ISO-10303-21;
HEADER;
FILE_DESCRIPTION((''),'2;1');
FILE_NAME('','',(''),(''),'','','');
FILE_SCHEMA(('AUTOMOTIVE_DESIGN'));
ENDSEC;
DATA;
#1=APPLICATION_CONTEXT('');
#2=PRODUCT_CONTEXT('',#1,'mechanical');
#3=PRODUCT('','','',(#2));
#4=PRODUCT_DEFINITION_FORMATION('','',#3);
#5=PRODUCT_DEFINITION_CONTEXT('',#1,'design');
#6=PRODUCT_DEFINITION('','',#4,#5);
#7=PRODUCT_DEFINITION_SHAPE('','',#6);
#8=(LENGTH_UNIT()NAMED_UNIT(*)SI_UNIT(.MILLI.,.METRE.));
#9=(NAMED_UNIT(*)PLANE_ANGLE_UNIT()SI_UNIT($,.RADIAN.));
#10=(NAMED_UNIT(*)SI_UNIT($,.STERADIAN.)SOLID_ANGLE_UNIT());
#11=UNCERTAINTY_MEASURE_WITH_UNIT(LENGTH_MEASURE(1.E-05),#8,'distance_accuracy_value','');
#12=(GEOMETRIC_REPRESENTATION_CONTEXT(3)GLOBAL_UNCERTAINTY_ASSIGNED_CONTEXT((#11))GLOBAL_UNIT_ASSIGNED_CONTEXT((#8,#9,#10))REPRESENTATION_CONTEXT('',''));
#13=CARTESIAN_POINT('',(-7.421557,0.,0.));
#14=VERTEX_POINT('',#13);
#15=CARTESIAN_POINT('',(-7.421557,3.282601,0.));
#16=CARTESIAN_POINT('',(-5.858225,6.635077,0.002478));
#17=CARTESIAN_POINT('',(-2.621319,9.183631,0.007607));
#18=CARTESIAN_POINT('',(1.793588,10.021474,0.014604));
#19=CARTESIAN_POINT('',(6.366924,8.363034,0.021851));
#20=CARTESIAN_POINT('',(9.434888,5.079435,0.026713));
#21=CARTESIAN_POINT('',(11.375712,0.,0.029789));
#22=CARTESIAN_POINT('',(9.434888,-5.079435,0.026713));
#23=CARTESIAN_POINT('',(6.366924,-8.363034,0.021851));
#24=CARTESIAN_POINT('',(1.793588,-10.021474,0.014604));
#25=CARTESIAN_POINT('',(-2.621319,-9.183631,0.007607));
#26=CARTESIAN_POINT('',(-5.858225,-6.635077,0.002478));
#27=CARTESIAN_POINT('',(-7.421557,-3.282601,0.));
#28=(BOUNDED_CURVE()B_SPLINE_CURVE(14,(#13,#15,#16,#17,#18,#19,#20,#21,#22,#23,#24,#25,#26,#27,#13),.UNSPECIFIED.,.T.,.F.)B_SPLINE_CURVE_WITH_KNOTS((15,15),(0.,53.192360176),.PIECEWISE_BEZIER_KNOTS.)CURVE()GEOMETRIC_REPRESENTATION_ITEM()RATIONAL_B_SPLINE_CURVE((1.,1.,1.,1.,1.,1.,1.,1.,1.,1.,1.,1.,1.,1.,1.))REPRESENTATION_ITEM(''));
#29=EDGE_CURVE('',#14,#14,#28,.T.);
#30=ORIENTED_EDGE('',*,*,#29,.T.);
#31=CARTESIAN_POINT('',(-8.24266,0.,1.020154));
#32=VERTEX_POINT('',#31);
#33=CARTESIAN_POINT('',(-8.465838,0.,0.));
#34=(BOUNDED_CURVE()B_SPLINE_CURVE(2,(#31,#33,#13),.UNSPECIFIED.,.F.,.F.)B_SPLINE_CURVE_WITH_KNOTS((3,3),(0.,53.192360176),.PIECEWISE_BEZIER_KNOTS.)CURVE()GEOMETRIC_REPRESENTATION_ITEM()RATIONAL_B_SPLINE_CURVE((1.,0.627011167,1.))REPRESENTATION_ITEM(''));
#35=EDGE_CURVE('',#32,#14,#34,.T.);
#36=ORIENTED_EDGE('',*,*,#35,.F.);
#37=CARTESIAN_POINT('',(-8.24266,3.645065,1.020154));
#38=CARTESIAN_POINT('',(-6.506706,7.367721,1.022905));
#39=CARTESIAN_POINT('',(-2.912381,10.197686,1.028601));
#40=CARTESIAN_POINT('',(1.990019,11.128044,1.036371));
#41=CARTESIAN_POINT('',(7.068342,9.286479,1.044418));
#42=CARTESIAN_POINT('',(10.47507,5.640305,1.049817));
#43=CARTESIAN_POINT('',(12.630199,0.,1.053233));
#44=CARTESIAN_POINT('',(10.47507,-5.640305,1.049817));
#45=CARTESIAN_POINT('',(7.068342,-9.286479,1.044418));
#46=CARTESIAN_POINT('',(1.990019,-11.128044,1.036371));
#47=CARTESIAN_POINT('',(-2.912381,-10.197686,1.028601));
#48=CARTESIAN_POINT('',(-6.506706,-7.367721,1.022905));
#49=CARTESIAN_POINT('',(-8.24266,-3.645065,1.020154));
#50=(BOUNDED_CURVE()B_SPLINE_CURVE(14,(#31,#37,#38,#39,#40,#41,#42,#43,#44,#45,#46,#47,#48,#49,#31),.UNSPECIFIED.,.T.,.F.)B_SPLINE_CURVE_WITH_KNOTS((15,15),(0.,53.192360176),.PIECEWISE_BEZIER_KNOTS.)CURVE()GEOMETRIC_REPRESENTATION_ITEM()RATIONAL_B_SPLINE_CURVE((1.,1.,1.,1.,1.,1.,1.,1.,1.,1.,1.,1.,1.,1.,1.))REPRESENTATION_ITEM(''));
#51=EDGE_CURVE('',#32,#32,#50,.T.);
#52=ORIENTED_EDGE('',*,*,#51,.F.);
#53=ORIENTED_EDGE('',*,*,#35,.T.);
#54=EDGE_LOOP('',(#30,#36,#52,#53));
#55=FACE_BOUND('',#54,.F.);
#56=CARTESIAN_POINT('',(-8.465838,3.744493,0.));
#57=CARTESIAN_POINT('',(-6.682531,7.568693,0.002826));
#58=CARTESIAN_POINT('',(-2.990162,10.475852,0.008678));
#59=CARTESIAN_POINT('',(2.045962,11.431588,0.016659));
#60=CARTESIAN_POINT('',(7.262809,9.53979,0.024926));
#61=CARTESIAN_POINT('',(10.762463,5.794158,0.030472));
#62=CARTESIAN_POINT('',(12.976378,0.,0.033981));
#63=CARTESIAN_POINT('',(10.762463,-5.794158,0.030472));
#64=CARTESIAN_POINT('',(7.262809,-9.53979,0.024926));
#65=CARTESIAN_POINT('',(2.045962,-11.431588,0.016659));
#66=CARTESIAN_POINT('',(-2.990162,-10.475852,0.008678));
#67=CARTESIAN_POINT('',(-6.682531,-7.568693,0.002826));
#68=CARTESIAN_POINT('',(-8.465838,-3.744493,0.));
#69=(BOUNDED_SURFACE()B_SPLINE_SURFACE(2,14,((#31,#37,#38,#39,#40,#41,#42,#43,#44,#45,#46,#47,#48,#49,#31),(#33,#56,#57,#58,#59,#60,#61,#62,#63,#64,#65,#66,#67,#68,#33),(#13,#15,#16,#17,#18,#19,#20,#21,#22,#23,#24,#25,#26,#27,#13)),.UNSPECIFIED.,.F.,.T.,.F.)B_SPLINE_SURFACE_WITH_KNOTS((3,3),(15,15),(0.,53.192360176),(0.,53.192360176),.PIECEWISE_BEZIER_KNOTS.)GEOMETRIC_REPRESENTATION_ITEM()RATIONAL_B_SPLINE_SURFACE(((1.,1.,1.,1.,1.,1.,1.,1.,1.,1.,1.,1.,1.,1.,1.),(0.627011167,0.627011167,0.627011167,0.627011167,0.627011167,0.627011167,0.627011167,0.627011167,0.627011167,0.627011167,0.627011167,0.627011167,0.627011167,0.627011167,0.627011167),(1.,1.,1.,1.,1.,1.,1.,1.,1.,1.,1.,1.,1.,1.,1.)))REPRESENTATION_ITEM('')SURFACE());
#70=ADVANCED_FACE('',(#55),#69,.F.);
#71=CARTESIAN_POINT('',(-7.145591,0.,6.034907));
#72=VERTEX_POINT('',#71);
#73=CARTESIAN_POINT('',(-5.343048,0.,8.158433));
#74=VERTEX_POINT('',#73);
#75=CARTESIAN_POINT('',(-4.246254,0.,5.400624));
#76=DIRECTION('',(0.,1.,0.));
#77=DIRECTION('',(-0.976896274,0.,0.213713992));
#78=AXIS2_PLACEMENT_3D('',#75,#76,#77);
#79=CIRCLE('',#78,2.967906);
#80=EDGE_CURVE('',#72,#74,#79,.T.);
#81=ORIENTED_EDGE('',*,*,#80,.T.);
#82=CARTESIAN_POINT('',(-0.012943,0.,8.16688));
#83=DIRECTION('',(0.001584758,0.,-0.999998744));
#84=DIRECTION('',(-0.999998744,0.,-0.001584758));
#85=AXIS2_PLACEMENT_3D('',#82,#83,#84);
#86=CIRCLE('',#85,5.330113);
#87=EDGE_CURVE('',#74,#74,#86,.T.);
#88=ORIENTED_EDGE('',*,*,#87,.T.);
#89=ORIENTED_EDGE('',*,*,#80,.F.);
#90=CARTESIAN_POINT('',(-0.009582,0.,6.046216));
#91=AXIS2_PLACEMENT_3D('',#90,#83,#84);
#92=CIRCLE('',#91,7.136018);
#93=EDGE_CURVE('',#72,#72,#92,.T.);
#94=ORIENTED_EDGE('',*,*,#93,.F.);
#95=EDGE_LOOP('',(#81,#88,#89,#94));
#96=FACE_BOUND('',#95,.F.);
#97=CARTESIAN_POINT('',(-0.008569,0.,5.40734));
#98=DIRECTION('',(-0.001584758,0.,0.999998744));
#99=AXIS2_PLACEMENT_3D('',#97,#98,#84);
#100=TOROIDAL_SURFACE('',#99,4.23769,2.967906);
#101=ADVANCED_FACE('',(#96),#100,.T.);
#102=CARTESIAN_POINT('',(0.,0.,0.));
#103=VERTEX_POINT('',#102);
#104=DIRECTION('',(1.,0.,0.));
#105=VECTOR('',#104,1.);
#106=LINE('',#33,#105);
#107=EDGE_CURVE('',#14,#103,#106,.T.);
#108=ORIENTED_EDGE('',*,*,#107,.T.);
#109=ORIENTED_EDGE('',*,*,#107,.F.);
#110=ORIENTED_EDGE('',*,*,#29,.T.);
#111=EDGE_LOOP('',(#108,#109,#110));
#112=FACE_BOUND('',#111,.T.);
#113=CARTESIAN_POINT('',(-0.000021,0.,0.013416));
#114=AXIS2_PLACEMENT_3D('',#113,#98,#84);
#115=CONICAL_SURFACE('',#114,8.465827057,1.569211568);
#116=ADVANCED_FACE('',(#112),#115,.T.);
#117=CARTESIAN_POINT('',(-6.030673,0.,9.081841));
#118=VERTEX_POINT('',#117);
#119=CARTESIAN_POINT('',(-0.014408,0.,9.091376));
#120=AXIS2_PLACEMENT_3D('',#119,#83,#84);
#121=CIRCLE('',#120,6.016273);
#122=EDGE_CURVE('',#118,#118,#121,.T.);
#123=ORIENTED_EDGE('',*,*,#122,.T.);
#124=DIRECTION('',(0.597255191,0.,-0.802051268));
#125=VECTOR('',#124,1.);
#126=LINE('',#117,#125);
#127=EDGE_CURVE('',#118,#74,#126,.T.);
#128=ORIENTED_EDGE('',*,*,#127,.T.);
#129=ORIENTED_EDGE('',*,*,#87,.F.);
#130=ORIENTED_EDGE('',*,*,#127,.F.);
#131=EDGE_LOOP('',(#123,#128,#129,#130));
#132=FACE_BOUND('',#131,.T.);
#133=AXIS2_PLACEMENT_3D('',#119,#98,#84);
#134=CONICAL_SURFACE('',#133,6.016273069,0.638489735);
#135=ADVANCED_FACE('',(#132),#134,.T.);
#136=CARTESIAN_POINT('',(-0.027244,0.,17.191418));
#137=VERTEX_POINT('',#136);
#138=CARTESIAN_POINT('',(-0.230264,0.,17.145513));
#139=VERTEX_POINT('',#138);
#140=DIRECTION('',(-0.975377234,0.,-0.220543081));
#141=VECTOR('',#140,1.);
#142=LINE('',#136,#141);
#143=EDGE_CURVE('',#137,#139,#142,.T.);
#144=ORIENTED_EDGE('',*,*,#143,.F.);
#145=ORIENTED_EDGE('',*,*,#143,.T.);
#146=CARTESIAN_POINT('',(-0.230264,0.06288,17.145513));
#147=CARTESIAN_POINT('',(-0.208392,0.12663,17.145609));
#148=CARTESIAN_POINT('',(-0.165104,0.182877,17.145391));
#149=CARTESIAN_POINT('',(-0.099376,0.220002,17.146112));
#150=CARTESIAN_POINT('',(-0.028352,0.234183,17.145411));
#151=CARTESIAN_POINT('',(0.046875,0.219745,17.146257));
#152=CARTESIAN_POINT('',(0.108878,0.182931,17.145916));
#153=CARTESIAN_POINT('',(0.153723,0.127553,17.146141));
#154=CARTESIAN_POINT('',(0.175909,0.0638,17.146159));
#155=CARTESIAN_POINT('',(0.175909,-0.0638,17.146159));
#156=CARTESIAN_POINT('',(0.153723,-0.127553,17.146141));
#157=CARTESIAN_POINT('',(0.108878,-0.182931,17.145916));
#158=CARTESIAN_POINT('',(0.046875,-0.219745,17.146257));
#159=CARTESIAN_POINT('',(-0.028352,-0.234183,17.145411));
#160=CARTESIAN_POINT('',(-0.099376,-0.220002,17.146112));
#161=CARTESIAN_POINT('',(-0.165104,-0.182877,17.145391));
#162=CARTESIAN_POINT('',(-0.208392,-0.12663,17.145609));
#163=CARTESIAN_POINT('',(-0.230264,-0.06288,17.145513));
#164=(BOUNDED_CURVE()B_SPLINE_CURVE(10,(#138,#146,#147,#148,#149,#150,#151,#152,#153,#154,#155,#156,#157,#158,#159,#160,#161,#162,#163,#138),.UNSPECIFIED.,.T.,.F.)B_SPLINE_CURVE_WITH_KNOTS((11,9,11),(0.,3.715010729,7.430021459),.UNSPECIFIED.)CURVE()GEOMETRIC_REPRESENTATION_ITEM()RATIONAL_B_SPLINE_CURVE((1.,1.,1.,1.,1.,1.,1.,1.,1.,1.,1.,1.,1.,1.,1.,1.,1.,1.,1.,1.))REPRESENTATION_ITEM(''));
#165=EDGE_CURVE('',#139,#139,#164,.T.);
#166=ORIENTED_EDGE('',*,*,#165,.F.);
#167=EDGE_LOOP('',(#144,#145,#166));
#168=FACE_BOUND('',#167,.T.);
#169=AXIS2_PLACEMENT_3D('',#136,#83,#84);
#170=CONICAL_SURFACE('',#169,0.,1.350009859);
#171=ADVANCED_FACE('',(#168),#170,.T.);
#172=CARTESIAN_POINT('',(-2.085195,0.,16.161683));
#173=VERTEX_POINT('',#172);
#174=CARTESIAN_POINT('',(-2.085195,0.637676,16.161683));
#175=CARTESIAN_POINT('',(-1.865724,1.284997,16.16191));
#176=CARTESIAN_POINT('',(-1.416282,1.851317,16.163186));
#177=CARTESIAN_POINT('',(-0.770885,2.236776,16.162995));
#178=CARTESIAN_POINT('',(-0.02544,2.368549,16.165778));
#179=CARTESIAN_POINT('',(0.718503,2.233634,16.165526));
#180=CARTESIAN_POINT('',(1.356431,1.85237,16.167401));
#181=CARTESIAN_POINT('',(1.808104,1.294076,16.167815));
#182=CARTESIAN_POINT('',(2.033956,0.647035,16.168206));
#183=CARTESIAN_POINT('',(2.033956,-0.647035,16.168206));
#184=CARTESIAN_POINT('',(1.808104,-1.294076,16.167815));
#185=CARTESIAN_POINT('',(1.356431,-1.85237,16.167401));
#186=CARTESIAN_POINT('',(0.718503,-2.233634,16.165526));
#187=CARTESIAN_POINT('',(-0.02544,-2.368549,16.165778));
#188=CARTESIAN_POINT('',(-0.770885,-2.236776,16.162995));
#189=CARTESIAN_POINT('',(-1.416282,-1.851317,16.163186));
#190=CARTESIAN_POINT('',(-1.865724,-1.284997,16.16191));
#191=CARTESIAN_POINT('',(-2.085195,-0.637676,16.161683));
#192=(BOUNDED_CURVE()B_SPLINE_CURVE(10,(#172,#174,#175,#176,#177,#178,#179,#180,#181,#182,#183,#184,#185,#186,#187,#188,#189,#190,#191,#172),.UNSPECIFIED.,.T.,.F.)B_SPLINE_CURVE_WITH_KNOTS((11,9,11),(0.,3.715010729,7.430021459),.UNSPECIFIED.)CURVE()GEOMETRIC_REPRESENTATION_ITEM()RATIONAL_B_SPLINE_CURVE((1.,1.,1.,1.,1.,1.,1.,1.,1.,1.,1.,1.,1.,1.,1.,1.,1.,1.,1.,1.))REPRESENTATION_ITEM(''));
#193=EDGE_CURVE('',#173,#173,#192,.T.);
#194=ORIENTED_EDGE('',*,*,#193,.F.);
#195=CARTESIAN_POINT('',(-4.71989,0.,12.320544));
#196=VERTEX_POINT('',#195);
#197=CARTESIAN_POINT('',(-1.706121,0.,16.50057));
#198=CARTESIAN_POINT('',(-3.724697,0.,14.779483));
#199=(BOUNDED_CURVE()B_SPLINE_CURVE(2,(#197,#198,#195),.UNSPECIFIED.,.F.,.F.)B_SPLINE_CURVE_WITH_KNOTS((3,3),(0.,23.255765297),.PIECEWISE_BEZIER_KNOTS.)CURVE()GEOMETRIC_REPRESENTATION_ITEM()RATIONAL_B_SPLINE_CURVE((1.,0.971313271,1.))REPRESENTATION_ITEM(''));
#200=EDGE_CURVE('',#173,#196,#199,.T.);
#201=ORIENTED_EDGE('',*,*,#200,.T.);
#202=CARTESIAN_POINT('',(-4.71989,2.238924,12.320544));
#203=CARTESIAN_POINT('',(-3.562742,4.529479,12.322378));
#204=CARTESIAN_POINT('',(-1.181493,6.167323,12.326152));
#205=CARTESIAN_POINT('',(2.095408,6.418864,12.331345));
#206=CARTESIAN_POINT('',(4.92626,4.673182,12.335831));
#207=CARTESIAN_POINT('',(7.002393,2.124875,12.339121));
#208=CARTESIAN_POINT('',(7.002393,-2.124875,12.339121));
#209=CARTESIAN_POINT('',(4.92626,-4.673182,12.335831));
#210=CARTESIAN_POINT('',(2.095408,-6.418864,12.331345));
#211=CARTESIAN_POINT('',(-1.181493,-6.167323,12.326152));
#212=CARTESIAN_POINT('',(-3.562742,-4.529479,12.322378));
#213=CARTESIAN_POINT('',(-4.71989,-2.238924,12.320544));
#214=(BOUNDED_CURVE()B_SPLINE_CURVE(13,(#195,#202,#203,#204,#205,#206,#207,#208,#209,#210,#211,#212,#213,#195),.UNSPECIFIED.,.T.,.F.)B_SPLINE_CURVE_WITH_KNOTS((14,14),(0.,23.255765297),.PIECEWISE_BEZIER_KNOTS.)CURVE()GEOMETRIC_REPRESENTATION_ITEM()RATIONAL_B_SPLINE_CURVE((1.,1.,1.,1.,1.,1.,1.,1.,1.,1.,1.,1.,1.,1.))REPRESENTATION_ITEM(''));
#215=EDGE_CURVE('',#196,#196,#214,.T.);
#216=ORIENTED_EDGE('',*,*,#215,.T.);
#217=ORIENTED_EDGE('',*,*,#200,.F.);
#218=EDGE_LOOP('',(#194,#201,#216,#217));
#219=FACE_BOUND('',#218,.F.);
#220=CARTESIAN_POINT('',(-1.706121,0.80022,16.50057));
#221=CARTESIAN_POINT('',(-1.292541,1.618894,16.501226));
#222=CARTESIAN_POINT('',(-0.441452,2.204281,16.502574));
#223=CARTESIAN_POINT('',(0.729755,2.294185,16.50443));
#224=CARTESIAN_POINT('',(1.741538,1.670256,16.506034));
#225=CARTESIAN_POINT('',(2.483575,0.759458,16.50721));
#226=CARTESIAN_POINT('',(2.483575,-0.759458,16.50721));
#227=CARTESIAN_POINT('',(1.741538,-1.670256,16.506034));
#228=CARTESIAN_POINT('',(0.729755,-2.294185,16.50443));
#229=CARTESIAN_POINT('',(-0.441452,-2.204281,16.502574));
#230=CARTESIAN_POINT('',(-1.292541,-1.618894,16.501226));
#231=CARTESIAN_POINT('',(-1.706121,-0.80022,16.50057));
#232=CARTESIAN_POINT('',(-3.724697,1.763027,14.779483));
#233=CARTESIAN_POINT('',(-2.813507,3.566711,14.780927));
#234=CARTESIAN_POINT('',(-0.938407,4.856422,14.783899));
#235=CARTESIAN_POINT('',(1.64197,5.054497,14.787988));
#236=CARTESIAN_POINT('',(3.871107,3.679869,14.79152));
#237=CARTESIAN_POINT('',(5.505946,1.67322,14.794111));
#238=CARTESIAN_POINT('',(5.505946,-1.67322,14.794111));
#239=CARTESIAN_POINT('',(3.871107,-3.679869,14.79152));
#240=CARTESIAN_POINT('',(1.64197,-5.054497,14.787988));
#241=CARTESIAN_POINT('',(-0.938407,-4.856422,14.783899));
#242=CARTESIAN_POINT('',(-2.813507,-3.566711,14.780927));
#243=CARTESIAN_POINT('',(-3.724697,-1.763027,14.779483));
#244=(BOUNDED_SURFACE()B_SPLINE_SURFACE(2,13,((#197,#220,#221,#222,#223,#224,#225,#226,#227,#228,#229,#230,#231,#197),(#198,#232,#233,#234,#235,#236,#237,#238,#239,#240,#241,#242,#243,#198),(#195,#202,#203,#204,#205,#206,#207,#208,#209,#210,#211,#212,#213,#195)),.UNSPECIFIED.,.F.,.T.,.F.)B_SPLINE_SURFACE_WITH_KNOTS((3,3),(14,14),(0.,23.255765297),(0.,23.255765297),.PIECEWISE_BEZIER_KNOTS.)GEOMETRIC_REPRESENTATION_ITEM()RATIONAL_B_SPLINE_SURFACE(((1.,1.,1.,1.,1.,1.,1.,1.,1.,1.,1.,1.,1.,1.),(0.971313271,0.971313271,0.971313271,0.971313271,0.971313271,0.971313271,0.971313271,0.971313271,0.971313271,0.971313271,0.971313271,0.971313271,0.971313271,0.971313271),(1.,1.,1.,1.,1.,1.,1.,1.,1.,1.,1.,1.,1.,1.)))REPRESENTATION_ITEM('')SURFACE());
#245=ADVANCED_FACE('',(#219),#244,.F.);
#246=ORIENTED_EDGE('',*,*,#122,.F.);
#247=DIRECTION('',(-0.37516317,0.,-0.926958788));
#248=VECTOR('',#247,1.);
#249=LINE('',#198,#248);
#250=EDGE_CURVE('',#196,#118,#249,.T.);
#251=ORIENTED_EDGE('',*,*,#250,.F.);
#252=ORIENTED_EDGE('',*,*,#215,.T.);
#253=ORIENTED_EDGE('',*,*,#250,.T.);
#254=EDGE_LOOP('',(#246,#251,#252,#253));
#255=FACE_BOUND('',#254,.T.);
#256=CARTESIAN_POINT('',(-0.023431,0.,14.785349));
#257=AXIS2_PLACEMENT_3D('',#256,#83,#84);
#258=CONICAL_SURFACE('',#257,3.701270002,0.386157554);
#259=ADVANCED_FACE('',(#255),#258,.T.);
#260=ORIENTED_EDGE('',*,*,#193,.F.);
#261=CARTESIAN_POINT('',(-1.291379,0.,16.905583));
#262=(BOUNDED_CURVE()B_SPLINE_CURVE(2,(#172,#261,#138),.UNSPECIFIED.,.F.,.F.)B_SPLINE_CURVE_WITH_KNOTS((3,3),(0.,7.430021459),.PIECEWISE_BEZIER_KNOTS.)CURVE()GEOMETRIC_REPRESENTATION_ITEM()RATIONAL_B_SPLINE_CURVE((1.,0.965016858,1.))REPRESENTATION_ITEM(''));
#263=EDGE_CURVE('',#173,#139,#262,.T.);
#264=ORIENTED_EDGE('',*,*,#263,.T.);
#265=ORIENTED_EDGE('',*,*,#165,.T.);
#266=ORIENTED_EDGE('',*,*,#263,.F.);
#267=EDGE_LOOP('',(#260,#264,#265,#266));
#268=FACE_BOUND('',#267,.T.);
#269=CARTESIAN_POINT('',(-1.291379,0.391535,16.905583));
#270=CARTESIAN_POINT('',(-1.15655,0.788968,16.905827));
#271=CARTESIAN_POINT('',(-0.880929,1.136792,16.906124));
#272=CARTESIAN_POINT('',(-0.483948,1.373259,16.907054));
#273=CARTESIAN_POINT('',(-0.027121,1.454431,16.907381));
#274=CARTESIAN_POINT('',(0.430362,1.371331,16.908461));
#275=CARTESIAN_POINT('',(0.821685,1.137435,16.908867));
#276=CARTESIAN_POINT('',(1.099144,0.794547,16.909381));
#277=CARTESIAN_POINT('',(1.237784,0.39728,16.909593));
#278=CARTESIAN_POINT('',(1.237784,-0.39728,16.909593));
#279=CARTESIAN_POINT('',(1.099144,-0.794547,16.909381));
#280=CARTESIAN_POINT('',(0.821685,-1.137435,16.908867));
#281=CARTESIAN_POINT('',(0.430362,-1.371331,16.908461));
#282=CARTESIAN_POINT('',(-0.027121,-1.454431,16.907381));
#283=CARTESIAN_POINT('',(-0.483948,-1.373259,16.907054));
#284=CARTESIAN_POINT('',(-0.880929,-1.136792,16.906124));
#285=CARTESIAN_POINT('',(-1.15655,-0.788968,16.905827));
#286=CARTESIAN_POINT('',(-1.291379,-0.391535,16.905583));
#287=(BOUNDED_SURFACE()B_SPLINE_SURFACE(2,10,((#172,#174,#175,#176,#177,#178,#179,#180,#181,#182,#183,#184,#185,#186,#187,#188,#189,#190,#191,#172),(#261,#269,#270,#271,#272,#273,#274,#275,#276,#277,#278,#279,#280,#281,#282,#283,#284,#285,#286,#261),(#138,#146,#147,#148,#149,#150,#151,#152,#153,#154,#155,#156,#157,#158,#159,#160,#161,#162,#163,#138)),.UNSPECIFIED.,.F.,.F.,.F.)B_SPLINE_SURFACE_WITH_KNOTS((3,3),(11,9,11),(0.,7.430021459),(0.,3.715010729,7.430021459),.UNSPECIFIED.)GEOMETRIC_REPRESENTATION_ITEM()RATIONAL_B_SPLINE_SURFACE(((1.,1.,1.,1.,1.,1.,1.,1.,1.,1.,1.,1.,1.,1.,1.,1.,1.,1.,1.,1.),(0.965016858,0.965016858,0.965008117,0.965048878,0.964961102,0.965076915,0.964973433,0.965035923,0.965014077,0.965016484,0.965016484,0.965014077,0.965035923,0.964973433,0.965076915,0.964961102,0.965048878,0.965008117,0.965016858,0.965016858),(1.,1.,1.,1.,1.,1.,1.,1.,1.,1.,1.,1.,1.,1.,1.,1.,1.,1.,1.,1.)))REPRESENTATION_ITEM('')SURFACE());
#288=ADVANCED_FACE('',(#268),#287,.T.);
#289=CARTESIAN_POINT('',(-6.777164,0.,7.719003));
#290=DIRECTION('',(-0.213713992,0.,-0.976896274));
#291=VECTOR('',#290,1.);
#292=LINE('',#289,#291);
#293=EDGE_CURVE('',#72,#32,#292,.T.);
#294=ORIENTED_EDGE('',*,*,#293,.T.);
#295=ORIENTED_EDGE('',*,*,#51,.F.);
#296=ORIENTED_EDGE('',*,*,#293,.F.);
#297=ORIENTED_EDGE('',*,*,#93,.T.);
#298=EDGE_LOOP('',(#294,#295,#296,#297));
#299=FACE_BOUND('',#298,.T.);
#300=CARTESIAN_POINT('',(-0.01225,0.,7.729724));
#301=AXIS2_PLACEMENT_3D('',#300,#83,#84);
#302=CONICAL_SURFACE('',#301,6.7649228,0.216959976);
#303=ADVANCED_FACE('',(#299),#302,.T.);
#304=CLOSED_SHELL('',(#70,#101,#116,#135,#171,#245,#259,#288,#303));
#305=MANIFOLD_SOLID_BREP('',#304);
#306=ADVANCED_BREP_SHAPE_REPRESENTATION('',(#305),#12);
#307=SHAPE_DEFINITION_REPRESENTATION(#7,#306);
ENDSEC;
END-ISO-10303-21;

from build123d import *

# Parameters (mm, degrees)
F2_R = 10.8349837227
F3_R = 4.004166267
F4_R = 0.840522708


# Not quite as in the source:
# - a fillet or chamfer that OpenCascade refuses, or shapes differently, is made with other operations: its cross-section is extruded or revolved along the edge and cut away or added


with BuildPart() as f1:
    # F0 (on Front) → F1 (revolve)
    with BuildSketch(Plane.XZ):
        Polygon((-8.4658376873, 0), (0, 0), (-0.0272442667, 17.1914175153), (-1.2093468104, 16.9241316617), (-3.7246965803, 14.7794829682), (-6.0306731611, 9.0818414465), (-5.3430483676, 8.1584332511), (-6.7771640606, 7.7190031298), align=None)
    revolve(axis=Axis((-0.0136221333, 0, 8.5957087576), (0.0015847578, 0, -0.9999987443)))

    # F2
    f2_edges = [f1.edges().sort_by_distance(p)[0] for p in [
        (3.677834, 0, 14.791214),
    ]]
    fillet(f2_edges, radius=F2_R)

    # F3
    f3_edges = [f1.edges().sort_by_distance(p)[0] for p in [
        (1.1557, 0, 16.92788),
    ]]
    fillet(f3_edges, radius=F3_R)

    # F4
    f4_edges = [f1.edges().sort_by_distance(p)[0] for p in [
        (8.465795, 0, 0.026833),
    ]]
    fillet(f4_edges, radius=F4_R)

    # F5: fillet of radius 2.9679064036 on 1 edges, made by hand

    # F5_s1 → F5_t2 (revolve, cut)
    with BuildSketch(Plane.XZ):
        with BuildLine():
            ThreePointArc((-7.1455909431, 6.0349072725), (-6.5089088862, 7.3212652789), (-5.3430483676, 8.1584332511))
            Line((-5.3430483676, 8.1584332511), (-6.7771640606, 7.7190031298))
            Line((-6.7771640606, 7.7190031298), (-7.1455909431, 6.0349072725))
        make_face()
    revolve(axis=Axis((-0.0122497554, 0, 7.7297238937), (0.0015847578, 0, -0.9999987443)), mode=Mode.SUBTRACT)


solid = f1.part
